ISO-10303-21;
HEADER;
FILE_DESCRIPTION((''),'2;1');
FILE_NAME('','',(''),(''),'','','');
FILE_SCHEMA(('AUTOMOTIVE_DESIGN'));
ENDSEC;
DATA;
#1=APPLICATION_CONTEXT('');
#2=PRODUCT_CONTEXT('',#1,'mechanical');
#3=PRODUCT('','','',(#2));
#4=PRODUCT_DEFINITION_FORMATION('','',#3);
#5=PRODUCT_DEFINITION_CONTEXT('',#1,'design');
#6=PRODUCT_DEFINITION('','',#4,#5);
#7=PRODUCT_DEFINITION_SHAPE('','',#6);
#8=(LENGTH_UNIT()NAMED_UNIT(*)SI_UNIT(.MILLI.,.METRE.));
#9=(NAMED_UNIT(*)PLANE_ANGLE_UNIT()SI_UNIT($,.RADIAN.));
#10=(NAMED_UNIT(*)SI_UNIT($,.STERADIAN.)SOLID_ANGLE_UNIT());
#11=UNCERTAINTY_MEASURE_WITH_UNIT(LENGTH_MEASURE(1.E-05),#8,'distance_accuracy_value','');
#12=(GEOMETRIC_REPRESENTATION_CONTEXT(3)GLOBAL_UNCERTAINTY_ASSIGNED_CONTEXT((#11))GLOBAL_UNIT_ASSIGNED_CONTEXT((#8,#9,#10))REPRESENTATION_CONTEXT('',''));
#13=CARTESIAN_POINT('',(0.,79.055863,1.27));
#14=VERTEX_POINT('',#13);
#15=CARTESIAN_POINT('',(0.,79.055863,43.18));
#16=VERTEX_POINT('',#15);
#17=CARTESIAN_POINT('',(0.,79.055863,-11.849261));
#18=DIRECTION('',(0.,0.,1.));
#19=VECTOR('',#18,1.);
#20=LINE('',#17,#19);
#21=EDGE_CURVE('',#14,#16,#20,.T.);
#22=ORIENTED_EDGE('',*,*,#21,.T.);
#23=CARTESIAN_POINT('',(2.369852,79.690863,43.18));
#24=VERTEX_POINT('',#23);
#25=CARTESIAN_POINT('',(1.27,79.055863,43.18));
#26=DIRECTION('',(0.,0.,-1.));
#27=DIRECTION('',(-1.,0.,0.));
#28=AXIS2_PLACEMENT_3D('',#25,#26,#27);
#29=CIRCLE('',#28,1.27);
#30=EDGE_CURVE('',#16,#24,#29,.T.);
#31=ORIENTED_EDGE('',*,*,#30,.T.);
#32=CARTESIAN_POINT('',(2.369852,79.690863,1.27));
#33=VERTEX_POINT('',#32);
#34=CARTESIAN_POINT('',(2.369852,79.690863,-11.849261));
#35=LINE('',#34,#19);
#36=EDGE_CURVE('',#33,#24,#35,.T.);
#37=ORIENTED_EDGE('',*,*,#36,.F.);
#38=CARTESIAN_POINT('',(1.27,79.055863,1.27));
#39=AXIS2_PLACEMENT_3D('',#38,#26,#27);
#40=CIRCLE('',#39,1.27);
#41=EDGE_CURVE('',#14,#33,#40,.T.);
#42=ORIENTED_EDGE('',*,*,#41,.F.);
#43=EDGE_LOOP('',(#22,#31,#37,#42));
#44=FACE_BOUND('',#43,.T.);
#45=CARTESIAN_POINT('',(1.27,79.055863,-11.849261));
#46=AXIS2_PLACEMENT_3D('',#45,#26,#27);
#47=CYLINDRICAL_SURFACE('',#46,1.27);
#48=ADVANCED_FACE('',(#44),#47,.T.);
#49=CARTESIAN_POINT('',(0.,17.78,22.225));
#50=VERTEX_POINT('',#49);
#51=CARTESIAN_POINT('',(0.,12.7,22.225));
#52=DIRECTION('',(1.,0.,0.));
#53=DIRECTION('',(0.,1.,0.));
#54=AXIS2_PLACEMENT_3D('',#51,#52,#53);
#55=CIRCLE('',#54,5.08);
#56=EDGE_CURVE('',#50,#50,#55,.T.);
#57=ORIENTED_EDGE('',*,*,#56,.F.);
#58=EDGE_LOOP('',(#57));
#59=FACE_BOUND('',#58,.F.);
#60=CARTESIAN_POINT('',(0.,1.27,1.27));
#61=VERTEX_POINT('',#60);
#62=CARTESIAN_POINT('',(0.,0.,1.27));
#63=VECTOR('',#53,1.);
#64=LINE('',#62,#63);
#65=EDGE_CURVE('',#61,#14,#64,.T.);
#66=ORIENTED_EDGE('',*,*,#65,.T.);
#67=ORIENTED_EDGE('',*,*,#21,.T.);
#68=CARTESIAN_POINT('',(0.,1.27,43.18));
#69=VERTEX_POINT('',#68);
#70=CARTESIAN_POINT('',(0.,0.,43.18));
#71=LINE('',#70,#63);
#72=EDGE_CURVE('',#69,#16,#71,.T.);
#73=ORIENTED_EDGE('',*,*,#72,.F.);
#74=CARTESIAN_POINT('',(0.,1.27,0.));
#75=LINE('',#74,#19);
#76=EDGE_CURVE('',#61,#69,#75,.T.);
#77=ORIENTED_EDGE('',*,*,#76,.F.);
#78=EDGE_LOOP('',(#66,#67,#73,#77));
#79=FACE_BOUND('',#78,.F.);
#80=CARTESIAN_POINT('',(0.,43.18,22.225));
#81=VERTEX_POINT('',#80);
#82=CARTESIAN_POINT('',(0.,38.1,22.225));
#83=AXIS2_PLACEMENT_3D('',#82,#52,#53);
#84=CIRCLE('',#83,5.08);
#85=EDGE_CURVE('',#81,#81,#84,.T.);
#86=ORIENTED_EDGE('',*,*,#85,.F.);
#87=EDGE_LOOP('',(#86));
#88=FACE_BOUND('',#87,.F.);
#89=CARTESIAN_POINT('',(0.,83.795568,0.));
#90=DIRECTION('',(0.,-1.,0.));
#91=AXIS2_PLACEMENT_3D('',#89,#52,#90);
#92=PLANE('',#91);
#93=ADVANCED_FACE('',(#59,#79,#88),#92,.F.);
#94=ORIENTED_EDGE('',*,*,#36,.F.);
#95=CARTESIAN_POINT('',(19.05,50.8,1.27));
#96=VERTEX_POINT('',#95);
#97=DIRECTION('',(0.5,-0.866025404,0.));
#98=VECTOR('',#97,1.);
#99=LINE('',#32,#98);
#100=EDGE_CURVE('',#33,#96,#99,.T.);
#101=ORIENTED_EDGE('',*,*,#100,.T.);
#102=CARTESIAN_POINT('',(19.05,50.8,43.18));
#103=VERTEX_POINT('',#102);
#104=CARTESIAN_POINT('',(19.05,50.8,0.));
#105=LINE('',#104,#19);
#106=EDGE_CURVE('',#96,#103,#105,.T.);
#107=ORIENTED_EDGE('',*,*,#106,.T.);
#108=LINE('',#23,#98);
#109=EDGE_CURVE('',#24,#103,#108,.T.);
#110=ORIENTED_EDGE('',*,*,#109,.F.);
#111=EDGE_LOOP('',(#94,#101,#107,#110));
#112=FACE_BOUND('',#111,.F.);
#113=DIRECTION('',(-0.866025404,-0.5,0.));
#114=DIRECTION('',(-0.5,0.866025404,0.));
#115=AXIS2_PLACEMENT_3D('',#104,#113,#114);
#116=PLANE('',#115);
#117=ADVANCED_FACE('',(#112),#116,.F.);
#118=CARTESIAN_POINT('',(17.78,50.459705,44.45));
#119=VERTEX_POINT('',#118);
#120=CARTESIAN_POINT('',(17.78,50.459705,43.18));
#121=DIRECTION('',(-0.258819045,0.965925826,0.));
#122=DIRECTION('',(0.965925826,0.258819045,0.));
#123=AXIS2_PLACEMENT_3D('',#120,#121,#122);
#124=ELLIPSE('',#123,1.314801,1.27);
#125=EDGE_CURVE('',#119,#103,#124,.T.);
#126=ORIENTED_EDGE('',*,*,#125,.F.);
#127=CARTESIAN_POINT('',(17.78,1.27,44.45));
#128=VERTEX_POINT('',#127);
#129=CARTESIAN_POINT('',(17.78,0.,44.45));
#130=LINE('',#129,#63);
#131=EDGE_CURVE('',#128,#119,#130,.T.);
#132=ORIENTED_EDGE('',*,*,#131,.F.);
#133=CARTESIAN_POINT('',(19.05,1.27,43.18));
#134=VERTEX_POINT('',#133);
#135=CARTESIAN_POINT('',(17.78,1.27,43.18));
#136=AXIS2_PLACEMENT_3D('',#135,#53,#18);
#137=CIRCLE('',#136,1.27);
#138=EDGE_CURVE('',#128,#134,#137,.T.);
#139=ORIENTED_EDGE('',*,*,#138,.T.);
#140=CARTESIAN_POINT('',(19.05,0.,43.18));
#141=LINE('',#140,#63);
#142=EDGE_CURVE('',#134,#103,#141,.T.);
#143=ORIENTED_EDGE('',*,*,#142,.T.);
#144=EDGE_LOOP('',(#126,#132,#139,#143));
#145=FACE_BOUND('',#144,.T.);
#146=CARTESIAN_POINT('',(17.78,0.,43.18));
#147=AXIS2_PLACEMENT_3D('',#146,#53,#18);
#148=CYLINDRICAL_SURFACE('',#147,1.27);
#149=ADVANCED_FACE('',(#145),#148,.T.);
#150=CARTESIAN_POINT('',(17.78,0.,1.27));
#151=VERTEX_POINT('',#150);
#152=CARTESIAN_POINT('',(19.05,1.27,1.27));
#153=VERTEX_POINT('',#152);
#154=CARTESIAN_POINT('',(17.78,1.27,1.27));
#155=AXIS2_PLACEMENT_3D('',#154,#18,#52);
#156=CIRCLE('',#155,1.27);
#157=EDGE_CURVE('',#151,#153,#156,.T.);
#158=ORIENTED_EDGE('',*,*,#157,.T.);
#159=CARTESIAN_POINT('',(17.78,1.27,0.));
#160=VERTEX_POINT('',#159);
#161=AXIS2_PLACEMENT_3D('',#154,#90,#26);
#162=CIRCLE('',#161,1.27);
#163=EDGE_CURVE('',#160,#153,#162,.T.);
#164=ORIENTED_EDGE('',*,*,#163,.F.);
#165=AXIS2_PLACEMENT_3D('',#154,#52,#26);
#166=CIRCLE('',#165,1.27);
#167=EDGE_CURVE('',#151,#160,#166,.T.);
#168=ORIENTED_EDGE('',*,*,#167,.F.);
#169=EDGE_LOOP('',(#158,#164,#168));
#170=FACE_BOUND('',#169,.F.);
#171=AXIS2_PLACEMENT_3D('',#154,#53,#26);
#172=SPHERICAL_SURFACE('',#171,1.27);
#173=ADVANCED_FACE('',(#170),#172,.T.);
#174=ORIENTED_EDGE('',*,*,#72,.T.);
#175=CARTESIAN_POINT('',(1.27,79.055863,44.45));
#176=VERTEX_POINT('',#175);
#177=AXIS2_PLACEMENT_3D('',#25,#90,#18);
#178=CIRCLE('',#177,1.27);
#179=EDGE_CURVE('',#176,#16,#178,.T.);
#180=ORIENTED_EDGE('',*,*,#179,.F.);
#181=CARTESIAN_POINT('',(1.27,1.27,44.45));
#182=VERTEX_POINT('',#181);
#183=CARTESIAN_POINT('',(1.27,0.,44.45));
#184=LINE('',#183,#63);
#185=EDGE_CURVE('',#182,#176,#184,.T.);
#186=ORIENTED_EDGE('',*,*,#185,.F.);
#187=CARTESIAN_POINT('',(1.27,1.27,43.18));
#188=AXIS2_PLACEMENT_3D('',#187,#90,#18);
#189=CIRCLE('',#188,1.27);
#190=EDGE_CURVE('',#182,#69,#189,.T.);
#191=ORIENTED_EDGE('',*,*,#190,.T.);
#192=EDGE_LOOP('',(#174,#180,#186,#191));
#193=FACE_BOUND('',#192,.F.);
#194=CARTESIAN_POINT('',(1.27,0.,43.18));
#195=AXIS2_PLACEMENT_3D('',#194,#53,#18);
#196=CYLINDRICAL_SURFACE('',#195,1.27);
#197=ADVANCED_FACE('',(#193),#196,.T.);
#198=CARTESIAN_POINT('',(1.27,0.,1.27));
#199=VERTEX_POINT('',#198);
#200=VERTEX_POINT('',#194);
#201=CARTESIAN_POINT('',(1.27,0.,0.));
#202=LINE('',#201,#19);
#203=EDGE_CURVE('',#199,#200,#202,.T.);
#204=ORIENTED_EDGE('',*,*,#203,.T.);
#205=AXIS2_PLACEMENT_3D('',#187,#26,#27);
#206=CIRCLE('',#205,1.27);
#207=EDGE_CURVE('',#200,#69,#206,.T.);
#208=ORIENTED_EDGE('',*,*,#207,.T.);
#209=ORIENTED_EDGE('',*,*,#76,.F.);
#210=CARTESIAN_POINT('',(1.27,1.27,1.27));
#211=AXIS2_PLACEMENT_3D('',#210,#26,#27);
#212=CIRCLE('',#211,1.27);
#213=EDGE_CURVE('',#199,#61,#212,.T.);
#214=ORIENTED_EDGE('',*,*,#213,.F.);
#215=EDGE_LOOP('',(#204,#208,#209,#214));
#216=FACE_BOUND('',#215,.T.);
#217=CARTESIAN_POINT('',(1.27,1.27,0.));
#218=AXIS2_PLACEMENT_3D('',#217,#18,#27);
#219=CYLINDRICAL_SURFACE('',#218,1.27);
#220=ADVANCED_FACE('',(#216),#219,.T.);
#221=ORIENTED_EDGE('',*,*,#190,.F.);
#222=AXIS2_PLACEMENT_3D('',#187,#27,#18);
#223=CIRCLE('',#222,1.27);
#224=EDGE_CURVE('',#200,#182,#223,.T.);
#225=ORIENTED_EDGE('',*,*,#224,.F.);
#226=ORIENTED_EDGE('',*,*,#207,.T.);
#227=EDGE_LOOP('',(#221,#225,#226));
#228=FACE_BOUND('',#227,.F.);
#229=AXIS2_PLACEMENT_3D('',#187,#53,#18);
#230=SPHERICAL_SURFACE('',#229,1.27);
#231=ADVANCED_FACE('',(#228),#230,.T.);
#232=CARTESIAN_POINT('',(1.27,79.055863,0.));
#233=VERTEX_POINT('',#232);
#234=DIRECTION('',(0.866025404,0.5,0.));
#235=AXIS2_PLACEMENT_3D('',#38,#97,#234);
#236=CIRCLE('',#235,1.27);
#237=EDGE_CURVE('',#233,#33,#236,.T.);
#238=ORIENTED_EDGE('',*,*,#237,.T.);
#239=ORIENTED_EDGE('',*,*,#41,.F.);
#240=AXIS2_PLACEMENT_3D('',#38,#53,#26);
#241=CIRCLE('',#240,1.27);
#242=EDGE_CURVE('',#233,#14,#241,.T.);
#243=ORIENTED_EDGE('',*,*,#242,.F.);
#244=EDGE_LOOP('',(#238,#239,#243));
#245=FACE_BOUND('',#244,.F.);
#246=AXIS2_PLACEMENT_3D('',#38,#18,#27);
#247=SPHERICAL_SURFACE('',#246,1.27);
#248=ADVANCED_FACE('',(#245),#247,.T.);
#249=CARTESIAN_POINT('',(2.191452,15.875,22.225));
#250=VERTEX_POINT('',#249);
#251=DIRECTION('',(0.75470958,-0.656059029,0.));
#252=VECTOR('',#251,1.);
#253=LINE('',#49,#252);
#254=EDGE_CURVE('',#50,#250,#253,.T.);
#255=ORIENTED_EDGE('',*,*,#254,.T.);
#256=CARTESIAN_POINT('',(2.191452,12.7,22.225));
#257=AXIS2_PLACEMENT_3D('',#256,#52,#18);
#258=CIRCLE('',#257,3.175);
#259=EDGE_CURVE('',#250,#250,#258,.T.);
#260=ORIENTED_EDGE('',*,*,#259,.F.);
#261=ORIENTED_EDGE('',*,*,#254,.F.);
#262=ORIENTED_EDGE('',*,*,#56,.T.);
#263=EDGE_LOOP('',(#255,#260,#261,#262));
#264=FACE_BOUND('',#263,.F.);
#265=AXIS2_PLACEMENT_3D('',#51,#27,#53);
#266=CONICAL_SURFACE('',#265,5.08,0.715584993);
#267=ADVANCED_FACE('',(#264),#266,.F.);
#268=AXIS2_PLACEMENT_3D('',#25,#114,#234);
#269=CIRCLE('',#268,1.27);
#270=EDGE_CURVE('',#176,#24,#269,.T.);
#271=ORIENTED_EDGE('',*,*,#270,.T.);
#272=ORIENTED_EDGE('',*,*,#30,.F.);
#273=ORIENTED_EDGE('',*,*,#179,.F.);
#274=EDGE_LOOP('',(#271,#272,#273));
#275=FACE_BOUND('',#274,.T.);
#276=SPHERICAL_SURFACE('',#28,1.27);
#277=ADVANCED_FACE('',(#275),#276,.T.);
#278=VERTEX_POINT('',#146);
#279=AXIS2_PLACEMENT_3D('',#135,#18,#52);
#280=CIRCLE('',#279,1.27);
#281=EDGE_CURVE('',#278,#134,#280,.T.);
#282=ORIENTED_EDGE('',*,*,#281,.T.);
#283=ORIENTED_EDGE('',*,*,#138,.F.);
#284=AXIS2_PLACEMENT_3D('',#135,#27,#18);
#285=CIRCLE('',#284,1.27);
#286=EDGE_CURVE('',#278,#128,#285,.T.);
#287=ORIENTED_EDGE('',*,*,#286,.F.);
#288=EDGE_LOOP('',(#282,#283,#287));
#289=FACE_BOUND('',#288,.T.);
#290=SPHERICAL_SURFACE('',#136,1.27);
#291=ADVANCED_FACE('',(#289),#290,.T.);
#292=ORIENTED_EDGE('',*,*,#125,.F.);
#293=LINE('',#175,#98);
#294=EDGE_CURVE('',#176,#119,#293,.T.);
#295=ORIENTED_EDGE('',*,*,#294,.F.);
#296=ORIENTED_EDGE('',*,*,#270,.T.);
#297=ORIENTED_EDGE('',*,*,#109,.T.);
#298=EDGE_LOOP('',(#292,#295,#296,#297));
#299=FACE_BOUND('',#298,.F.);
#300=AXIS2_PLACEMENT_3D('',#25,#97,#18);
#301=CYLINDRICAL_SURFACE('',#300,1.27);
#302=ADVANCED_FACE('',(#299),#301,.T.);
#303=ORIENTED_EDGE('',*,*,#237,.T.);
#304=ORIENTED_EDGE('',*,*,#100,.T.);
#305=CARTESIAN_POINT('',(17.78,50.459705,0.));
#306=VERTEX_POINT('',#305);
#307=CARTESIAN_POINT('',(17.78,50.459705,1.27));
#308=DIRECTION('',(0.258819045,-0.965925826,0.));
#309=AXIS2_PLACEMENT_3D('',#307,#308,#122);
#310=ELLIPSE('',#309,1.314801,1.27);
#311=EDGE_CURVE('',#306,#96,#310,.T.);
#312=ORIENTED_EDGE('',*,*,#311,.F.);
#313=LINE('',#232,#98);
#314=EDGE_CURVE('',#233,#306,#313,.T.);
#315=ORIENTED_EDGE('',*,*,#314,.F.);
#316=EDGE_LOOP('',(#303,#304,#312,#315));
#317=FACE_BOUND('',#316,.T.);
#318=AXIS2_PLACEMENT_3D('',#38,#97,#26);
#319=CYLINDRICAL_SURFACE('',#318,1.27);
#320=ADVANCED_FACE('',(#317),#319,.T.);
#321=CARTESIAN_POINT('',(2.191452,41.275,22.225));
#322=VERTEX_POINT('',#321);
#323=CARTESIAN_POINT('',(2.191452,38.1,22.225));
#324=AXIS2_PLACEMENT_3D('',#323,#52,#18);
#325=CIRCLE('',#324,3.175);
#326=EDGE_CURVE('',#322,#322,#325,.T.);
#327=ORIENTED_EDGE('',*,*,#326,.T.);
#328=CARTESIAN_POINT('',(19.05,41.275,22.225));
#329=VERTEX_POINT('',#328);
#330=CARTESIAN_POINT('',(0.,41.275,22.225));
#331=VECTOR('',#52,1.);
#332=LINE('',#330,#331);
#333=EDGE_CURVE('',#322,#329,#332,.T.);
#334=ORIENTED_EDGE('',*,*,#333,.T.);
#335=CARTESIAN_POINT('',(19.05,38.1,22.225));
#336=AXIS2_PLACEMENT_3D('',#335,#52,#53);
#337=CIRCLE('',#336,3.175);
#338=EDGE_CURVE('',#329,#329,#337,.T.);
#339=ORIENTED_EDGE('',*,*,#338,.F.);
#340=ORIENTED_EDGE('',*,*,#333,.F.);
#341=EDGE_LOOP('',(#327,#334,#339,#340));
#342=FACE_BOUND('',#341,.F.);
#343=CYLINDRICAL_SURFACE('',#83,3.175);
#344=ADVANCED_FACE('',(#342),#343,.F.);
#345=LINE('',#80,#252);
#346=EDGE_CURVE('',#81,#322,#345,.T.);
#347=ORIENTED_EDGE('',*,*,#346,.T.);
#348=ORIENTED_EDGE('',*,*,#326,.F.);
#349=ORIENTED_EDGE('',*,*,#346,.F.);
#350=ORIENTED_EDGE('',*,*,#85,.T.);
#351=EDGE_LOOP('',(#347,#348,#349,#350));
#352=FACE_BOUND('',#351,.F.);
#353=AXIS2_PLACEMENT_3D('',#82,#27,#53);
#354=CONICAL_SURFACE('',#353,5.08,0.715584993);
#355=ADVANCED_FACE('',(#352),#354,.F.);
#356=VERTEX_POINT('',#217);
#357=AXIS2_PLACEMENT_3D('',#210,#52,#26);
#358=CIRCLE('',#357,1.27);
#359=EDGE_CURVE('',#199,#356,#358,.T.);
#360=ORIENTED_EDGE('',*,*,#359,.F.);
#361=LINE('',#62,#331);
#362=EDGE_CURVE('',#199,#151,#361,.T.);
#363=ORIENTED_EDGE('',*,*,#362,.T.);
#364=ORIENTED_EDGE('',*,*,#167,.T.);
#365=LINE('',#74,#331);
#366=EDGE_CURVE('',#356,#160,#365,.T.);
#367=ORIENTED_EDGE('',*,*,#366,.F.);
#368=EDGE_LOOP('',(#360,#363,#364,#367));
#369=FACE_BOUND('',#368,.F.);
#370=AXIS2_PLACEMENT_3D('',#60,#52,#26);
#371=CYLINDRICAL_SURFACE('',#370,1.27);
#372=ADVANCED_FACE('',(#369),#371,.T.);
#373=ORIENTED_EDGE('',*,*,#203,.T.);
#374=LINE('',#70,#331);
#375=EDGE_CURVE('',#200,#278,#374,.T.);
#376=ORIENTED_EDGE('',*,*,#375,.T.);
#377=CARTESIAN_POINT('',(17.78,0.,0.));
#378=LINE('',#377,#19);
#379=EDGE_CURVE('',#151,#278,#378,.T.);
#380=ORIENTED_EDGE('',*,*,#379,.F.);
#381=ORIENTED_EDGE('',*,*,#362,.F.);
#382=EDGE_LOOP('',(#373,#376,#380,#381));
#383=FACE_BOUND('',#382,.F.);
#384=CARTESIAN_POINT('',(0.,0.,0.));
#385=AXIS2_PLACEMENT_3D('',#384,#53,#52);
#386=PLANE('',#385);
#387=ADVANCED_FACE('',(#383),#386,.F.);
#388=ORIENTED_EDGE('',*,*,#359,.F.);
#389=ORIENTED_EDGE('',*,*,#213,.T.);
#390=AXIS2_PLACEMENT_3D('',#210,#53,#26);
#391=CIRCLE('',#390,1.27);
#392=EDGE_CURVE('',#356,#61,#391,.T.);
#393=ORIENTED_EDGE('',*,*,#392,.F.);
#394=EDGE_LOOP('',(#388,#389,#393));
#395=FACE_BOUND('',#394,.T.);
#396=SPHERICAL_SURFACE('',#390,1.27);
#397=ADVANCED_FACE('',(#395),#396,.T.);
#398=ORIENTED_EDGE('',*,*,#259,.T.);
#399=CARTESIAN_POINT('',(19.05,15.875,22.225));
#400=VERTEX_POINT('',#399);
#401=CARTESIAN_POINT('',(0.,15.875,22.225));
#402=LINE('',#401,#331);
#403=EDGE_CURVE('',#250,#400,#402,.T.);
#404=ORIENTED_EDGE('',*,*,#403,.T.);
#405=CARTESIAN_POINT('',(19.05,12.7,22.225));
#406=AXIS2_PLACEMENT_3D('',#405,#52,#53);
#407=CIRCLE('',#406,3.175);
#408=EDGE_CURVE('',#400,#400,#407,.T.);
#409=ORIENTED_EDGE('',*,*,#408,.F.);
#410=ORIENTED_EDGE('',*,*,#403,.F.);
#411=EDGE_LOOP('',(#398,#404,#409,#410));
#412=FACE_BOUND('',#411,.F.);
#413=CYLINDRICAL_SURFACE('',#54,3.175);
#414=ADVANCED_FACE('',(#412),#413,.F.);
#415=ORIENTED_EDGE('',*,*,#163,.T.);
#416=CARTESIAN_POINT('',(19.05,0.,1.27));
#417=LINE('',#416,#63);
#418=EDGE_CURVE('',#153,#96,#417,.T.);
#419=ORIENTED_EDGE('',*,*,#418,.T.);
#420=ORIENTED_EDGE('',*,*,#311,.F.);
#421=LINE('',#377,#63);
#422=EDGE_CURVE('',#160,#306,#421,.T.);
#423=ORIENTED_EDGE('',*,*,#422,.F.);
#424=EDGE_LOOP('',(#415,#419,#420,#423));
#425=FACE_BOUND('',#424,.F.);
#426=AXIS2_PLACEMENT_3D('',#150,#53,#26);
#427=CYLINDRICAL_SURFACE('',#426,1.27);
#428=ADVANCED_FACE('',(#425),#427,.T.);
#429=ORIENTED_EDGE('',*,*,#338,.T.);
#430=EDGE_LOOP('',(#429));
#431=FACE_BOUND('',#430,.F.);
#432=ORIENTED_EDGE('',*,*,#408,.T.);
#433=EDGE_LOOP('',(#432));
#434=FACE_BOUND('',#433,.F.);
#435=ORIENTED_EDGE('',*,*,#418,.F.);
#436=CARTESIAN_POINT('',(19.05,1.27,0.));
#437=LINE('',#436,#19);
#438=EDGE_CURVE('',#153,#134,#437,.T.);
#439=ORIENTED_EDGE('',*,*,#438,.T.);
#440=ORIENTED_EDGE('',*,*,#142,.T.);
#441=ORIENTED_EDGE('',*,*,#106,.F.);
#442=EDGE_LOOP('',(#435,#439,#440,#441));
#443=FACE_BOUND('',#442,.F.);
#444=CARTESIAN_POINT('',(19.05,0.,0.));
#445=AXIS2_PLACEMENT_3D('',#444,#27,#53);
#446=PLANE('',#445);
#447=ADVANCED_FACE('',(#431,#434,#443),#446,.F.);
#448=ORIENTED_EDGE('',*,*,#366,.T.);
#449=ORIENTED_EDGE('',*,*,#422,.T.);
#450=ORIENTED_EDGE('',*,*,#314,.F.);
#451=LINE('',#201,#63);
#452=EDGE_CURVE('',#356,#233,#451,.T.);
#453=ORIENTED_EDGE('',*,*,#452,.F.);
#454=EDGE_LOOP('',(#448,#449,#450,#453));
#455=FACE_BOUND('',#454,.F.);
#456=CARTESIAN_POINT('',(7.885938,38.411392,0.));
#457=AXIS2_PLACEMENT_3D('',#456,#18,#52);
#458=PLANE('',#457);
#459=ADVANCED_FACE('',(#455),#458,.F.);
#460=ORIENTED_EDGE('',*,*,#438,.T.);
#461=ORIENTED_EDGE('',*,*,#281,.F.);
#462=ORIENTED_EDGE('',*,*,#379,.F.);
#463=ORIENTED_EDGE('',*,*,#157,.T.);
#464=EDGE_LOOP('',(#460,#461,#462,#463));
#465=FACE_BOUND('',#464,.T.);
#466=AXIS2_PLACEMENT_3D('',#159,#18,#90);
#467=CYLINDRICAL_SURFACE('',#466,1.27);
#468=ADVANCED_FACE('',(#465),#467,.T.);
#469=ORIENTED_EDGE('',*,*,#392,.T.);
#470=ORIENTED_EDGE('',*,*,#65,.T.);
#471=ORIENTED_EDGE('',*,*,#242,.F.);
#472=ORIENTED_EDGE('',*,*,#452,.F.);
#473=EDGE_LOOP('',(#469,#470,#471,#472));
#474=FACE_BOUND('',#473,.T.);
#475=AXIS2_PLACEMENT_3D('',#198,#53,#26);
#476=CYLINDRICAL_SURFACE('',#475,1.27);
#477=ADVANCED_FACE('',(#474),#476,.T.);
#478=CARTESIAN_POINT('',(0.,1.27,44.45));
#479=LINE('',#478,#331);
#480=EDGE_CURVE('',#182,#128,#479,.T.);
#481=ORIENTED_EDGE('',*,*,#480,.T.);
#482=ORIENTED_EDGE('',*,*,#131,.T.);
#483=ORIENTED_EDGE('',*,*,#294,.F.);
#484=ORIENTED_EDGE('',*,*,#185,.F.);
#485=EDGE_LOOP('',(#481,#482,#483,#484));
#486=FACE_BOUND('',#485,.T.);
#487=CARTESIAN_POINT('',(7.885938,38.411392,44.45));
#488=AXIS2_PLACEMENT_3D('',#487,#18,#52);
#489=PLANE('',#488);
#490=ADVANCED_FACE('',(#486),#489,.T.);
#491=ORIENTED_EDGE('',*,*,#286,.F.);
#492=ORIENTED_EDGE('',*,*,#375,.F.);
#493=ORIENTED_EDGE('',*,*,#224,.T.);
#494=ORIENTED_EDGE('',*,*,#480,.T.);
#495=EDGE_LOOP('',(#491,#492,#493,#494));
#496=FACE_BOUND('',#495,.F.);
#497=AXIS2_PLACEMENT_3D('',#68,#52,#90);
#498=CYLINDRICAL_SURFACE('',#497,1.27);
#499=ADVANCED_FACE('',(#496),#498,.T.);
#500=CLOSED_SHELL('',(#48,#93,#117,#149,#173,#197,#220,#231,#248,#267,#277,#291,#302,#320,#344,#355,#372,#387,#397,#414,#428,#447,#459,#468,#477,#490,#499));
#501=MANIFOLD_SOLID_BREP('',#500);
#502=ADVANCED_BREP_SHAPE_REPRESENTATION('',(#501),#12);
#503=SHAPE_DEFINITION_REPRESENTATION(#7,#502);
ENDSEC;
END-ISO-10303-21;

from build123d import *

# Parameters (mm, degrees)
F1_DEPTH       = 44.45
F3_D           = 6.35
F3_CSINK_D     = 10.16
F3_CSINK_ANGLE = 82
F4_T1_DEPTH    = 68.1485226281
F5_R           = 1.27


# Not quite as in the source:
# - a fillet or chamfer that OpenCascade refuses, or shapes differently, is made with other operations: its cross-section is extruded or revolved along the edge and cut away or added
# - a feature names something its author has since deleted; it is built from what else it names


with BuildPart() as f1:
    # F0 (on Top) → F1 (new body)
    with BuildSketch(Plane.XY):
        Polygon((0, 83.7955678842), (0, 0), (19.05, 0), (19.05, 50.8), align=None)
    extrude(amount=F1_DEPTH)

    # F3 (through all)
    with Locations(Plane(origin=(0, 0, 0), x_dir=(0, -1, 0), z_dir=(-1, 0, 0))):
        with Locations((-12.7, 22.225), (-38.1, 22.225)):
            CounterSinkHole(F3_D / 2, F3_CSINK_D / 2, counter_sink_angle=F3_CSINK_ANGLE)

    # F4: fillet of radius 1.27 on 1 edges, made by hand

    # F4_s2 → F4_t1 (cut)
    with BuildSketch(Plane.XY.offset(-11.849261314)):
        with BuildLine():
            ThreePointArc((0, 79.0558633586), (0.9412998127, 80.282589158), (2.3698522628, 79.6908633586))
            Line((2.3698522628, 79.6908633586), (0, 83.7955678842))
            Line((0, 83.7955678842), (0, 79.0558633586))
        make_face()
    extrude(amount=F4_T1_DEPTH, mode=Mode.SUBTRACT)

    # F5
    f5_edges = [f1.edges().sort_by_distance(p)[0] for p in [
        (0.9413, 80.282589, 44.45),
        (10.709926, 65.245432, 44.45),
        (19.05, 25.4, 44.45),
        (9.525, 0, 44.45),
        (0, 39.527932, 44.45),
        (0.9413, 80.282589, 0),
        (10.709926, 65.245432, 0),
        (19.05, 25.4, 0),
        (9.525, 0, 0),
        (0, 39.527932, 0),
        (0, 0, 22.225),
        (19.05, 0, 22.225),
    ]]
    fillet(f5_edges, radius=F5_R)


solid = f1.part
